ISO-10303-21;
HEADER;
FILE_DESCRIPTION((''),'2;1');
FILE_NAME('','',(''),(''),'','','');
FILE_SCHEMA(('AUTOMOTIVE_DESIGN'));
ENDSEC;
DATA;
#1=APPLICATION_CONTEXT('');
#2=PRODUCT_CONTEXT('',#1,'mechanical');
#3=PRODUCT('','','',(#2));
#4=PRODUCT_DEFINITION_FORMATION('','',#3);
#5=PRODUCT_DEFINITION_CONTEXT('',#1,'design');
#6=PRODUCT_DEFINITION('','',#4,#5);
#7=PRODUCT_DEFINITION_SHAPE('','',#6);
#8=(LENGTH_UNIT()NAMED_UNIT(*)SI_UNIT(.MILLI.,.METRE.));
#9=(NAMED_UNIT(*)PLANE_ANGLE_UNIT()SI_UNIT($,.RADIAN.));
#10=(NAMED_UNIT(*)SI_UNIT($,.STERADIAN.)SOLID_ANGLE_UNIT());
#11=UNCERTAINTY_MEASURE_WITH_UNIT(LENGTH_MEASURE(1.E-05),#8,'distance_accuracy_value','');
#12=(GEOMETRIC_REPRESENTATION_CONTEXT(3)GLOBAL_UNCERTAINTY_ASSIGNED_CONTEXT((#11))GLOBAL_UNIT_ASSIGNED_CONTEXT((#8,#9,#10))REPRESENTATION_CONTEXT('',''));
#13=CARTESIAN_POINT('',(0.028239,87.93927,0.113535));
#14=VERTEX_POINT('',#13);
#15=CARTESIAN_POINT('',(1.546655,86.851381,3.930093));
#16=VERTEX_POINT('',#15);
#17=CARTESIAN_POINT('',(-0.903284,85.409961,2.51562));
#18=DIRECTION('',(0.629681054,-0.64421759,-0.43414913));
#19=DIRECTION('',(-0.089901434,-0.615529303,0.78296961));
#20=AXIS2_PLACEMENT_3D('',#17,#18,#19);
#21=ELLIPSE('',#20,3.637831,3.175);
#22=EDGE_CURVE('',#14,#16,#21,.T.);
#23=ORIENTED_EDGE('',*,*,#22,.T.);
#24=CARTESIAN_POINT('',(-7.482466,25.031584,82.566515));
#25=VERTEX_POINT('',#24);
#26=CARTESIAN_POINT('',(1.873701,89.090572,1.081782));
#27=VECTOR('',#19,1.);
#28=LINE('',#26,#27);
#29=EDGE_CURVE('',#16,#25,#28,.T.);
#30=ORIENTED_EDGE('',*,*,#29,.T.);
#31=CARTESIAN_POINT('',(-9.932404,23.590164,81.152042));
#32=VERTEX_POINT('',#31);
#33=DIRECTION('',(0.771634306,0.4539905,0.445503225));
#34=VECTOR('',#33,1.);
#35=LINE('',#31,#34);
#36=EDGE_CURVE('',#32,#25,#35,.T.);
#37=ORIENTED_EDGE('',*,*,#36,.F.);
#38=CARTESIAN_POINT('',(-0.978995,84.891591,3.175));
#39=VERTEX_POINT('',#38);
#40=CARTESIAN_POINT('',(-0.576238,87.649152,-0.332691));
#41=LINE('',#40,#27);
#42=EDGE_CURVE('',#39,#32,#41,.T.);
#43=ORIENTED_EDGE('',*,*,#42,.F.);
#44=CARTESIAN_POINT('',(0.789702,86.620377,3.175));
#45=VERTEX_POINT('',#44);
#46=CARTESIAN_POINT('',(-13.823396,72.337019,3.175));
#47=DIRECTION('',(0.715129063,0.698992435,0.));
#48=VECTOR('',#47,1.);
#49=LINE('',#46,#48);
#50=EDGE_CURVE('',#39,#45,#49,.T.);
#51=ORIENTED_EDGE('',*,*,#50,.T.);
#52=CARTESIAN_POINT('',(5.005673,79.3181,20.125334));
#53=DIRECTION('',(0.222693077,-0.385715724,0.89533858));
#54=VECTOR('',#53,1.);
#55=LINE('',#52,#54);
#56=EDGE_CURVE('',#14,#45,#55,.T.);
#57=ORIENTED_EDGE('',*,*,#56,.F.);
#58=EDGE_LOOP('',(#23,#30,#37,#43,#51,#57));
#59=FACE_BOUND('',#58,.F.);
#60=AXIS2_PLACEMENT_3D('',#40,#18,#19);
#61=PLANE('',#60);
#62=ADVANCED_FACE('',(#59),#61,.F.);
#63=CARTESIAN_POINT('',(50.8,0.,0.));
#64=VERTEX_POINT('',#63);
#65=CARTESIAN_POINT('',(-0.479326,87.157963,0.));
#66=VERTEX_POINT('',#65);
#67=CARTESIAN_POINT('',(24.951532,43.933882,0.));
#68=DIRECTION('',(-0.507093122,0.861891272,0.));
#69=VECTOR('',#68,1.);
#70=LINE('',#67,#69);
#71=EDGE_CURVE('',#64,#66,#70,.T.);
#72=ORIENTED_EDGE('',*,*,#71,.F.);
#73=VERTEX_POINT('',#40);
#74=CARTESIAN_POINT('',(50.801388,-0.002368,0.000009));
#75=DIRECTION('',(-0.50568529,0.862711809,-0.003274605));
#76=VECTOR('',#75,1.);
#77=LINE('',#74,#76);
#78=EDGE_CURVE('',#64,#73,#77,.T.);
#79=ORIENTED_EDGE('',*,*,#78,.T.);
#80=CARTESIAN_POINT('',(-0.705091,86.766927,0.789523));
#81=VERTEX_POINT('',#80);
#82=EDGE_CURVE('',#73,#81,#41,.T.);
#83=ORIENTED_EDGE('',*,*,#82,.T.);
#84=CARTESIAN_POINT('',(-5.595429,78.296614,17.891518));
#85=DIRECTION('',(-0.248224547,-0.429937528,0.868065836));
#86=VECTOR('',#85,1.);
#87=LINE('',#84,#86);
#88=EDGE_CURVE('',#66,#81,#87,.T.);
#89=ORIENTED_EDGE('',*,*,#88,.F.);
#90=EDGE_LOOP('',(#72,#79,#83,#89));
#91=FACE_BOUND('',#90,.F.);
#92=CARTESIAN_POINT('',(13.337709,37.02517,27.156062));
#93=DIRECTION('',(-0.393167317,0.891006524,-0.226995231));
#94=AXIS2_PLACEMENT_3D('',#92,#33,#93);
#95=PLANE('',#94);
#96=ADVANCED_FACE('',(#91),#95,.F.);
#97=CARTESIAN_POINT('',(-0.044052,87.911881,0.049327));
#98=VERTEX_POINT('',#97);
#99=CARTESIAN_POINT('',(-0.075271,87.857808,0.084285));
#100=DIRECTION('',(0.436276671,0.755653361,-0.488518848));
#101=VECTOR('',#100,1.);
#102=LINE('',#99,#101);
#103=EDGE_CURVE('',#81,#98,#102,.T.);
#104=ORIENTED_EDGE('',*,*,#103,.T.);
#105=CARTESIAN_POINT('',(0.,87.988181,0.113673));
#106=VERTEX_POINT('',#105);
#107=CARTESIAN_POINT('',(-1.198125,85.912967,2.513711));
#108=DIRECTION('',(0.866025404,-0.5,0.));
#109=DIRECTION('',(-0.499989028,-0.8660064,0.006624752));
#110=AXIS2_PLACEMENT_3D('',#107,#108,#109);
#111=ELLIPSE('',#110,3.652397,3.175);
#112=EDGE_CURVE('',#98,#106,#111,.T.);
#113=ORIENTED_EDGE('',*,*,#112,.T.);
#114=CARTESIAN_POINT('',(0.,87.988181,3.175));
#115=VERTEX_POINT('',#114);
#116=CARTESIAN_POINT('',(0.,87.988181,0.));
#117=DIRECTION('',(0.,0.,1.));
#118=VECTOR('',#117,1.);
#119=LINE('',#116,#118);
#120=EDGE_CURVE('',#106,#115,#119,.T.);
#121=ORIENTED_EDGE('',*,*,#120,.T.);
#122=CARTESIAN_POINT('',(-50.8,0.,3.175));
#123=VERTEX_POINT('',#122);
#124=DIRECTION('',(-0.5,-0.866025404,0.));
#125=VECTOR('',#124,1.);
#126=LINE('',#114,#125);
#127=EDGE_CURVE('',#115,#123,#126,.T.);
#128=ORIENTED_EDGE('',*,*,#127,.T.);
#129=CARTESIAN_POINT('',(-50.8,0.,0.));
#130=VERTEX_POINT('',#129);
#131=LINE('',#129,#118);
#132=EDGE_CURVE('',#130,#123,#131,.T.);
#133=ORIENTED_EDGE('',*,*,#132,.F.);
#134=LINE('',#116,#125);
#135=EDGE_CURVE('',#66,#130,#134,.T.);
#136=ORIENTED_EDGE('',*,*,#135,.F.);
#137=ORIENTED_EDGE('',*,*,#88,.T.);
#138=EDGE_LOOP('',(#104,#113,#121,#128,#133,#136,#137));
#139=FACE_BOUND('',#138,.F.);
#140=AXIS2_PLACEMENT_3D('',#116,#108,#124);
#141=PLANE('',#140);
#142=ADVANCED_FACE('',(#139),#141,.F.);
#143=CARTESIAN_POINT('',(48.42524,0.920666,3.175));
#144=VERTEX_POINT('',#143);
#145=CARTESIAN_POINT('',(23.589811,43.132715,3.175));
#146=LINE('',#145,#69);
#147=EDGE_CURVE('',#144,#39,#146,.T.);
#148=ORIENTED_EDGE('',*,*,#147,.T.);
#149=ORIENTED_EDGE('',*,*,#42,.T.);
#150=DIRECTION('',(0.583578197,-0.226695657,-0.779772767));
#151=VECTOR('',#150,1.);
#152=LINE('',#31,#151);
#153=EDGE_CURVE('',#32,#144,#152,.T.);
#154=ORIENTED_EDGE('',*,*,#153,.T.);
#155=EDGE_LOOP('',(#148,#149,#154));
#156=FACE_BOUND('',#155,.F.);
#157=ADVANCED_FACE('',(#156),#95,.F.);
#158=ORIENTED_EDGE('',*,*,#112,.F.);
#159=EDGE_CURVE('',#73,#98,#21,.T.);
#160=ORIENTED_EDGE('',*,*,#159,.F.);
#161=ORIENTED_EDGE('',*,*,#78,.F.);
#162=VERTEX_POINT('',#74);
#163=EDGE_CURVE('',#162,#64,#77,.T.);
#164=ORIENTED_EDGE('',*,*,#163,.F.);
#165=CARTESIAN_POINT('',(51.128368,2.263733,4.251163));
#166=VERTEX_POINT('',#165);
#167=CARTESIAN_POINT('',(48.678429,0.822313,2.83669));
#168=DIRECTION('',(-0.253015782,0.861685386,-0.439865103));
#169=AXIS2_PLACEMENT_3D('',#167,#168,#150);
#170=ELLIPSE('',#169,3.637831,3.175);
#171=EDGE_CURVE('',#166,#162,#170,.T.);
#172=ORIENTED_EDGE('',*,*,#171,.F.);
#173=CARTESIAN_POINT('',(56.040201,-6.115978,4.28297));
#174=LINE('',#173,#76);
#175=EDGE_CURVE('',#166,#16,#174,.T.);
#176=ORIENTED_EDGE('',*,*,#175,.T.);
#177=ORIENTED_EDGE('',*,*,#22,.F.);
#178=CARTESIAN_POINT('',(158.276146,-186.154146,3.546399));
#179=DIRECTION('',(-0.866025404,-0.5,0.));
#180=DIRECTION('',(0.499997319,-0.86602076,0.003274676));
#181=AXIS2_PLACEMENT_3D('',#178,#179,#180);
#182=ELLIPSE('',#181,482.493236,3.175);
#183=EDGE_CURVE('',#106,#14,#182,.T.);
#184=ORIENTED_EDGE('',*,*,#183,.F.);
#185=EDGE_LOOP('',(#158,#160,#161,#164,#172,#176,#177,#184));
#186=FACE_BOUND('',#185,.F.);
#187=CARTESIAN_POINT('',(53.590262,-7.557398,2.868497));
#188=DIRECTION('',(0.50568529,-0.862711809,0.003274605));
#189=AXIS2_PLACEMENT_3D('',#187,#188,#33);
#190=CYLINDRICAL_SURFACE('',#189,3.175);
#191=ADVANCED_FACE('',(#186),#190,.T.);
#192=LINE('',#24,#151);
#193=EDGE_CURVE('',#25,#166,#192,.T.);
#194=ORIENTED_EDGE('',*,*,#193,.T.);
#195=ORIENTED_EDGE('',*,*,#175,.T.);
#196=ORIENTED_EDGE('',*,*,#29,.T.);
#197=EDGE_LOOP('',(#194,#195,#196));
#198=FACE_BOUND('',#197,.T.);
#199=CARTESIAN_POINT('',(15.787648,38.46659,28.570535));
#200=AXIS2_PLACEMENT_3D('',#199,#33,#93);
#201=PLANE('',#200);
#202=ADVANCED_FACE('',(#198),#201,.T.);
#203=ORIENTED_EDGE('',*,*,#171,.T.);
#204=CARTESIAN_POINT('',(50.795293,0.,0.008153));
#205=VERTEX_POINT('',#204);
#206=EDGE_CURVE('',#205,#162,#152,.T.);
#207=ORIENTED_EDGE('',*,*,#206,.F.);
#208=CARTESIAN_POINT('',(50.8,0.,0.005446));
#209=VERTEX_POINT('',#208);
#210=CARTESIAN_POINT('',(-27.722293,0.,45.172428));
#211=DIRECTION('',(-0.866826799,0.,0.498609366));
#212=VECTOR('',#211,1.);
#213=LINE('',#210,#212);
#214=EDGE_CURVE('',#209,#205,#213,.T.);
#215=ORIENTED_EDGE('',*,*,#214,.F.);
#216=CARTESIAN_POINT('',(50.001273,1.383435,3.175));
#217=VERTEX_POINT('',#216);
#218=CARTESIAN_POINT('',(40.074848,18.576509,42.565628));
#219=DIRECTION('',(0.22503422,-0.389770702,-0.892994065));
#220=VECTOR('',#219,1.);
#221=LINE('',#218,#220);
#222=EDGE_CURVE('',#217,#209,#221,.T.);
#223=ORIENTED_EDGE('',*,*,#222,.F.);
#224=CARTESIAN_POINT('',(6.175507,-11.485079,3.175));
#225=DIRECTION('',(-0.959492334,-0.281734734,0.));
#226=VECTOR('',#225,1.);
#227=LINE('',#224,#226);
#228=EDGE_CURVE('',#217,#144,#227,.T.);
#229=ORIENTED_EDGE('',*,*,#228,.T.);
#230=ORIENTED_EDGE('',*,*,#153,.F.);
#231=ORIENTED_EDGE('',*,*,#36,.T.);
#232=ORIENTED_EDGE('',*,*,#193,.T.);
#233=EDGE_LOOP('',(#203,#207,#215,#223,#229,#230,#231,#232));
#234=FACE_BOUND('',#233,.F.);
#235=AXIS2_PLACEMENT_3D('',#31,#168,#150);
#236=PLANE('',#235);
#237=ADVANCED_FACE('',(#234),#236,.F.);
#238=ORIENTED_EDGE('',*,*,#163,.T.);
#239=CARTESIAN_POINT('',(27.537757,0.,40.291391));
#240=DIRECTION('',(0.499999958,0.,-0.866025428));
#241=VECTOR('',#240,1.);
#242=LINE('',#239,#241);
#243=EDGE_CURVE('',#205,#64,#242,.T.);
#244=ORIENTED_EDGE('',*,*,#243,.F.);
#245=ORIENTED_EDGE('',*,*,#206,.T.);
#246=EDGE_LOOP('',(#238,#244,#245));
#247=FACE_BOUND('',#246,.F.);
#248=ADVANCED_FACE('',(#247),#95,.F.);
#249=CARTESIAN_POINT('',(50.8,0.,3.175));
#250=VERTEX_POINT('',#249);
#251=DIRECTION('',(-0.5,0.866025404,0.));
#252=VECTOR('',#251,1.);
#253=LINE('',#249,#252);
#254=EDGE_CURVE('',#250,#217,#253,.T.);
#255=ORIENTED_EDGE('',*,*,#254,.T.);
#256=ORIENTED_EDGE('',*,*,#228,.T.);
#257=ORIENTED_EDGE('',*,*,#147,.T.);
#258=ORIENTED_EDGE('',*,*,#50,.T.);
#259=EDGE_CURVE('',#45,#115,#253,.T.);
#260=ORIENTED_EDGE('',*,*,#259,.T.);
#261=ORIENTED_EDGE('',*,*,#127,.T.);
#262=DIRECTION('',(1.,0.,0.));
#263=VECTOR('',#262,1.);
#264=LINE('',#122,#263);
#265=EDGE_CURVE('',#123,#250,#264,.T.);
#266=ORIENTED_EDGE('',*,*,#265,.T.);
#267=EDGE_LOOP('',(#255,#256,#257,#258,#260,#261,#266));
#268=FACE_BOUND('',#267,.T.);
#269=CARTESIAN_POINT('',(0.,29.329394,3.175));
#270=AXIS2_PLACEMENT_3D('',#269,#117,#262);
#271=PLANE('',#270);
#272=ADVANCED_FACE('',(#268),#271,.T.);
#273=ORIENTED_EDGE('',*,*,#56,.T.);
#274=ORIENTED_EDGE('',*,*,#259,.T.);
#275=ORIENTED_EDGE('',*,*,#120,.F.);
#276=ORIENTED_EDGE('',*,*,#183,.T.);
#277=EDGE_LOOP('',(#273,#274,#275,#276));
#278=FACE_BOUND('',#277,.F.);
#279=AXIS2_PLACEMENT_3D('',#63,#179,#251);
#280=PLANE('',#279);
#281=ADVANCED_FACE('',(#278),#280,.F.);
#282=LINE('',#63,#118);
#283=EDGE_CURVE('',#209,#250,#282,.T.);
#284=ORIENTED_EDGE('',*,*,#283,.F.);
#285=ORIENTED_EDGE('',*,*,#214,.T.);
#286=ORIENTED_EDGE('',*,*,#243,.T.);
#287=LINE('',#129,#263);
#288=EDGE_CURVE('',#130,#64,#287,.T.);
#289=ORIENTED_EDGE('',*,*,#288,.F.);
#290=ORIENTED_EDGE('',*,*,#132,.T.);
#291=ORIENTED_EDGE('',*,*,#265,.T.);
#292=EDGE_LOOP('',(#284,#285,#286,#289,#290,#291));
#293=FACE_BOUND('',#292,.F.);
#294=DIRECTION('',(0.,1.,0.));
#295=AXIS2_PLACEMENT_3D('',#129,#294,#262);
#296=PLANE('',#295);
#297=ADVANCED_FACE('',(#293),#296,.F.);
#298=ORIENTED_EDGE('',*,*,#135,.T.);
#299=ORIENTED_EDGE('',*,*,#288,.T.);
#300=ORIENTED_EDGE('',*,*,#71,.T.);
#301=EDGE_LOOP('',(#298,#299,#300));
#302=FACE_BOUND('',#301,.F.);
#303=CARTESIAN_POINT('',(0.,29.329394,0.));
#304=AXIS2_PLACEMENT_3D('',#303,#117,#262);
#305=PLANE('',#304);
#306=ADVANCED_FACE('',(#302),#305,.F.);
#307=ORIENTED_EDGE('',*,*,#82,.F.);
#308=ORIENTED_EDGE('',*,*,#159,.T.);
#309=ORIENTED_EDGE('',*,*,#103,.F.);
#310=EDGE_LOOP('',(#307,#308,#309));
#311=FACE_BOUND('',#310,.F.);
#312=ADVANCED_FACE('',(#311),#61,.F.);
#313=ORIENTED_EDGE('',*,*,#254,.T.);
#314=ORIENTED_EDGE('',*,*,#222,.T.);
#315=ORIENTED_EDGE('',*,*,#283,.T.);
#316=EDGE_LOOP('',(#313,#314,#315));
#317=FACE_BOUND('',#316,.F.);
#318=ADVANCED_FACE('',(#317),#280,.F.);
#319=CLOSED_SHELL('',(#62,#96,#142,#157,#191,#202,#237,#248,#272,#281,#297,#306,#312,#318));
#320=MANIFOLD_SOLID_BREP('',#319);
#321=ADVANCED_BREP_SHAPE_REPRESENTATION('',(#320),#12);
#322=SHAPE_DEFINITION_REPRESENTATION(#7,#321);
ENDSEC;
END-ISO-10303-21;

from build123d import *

# Parameters (mm, degrees)
F1_DEPTH    = 3.175
F5_DEPTH    = 3.175
F6_T1_DEPTH = 117.475


# Not quite as in the source:
# - a fillet or chamfer that OpenCascade refuses, or shapes differently, is made with other operations: its cross-section is extruded or revolved along the edge and cut away or added


with BuildPart() as f1:
    # F0 (on Top) → F1 (new body)
    with BuildSketch(Plane.XY):
        Polygon((50.8, 0), (0, 87.9881810245), (-50.8, 0), align=None)
    extrude(amount=F1_DEPTH)

    # F4 (on line) → F5 (join)
    with BuildSketch(Plane(origin=(30.2473107364, 17.7959839325, 17.4632910558), x_dir=(-0.3931673168, 0.8910065242, -0.226995231), z_dir=(0.7716343063, 0.4539904997, 0.445503225))):
        Polygon((6.5029600393, 75.2459340132), (-19.9755570322, -25.4006840255), (78.3980433443, 0), align=None)
    extrude(amount=F5_DEPTH)

    # F6: fillet of radius 3.175 on 1 edges, made by hand

    # F6_s2 → F6_t1 (cut)
    with BuildSketch(Plane(origin=(17.005719551, -29.012184774, 0.1101218851), x_dir=(-0.862716434, -0.5056880012, 0), z_dir=(-0.5056852899, 0.8627118085, -0.0032746052))):
        with BuildLine():
            ThreePointArc((-45.25402581, 4.1728704395), (-45.421662158, 1.7486197382), (-43.8259948462, -0.0841211704))
            Line((-43.8259948462, -0.0841211704), (-46.668506133, 1.3303591527))
            Line((-46.668506133, 1.3303591527), (-45.25402581, 4.1728704395))
        make_face()
    extrude(amount=F6_T1_DEPTH, mode=Mode.SUBTRACT)


solid = f1.part
